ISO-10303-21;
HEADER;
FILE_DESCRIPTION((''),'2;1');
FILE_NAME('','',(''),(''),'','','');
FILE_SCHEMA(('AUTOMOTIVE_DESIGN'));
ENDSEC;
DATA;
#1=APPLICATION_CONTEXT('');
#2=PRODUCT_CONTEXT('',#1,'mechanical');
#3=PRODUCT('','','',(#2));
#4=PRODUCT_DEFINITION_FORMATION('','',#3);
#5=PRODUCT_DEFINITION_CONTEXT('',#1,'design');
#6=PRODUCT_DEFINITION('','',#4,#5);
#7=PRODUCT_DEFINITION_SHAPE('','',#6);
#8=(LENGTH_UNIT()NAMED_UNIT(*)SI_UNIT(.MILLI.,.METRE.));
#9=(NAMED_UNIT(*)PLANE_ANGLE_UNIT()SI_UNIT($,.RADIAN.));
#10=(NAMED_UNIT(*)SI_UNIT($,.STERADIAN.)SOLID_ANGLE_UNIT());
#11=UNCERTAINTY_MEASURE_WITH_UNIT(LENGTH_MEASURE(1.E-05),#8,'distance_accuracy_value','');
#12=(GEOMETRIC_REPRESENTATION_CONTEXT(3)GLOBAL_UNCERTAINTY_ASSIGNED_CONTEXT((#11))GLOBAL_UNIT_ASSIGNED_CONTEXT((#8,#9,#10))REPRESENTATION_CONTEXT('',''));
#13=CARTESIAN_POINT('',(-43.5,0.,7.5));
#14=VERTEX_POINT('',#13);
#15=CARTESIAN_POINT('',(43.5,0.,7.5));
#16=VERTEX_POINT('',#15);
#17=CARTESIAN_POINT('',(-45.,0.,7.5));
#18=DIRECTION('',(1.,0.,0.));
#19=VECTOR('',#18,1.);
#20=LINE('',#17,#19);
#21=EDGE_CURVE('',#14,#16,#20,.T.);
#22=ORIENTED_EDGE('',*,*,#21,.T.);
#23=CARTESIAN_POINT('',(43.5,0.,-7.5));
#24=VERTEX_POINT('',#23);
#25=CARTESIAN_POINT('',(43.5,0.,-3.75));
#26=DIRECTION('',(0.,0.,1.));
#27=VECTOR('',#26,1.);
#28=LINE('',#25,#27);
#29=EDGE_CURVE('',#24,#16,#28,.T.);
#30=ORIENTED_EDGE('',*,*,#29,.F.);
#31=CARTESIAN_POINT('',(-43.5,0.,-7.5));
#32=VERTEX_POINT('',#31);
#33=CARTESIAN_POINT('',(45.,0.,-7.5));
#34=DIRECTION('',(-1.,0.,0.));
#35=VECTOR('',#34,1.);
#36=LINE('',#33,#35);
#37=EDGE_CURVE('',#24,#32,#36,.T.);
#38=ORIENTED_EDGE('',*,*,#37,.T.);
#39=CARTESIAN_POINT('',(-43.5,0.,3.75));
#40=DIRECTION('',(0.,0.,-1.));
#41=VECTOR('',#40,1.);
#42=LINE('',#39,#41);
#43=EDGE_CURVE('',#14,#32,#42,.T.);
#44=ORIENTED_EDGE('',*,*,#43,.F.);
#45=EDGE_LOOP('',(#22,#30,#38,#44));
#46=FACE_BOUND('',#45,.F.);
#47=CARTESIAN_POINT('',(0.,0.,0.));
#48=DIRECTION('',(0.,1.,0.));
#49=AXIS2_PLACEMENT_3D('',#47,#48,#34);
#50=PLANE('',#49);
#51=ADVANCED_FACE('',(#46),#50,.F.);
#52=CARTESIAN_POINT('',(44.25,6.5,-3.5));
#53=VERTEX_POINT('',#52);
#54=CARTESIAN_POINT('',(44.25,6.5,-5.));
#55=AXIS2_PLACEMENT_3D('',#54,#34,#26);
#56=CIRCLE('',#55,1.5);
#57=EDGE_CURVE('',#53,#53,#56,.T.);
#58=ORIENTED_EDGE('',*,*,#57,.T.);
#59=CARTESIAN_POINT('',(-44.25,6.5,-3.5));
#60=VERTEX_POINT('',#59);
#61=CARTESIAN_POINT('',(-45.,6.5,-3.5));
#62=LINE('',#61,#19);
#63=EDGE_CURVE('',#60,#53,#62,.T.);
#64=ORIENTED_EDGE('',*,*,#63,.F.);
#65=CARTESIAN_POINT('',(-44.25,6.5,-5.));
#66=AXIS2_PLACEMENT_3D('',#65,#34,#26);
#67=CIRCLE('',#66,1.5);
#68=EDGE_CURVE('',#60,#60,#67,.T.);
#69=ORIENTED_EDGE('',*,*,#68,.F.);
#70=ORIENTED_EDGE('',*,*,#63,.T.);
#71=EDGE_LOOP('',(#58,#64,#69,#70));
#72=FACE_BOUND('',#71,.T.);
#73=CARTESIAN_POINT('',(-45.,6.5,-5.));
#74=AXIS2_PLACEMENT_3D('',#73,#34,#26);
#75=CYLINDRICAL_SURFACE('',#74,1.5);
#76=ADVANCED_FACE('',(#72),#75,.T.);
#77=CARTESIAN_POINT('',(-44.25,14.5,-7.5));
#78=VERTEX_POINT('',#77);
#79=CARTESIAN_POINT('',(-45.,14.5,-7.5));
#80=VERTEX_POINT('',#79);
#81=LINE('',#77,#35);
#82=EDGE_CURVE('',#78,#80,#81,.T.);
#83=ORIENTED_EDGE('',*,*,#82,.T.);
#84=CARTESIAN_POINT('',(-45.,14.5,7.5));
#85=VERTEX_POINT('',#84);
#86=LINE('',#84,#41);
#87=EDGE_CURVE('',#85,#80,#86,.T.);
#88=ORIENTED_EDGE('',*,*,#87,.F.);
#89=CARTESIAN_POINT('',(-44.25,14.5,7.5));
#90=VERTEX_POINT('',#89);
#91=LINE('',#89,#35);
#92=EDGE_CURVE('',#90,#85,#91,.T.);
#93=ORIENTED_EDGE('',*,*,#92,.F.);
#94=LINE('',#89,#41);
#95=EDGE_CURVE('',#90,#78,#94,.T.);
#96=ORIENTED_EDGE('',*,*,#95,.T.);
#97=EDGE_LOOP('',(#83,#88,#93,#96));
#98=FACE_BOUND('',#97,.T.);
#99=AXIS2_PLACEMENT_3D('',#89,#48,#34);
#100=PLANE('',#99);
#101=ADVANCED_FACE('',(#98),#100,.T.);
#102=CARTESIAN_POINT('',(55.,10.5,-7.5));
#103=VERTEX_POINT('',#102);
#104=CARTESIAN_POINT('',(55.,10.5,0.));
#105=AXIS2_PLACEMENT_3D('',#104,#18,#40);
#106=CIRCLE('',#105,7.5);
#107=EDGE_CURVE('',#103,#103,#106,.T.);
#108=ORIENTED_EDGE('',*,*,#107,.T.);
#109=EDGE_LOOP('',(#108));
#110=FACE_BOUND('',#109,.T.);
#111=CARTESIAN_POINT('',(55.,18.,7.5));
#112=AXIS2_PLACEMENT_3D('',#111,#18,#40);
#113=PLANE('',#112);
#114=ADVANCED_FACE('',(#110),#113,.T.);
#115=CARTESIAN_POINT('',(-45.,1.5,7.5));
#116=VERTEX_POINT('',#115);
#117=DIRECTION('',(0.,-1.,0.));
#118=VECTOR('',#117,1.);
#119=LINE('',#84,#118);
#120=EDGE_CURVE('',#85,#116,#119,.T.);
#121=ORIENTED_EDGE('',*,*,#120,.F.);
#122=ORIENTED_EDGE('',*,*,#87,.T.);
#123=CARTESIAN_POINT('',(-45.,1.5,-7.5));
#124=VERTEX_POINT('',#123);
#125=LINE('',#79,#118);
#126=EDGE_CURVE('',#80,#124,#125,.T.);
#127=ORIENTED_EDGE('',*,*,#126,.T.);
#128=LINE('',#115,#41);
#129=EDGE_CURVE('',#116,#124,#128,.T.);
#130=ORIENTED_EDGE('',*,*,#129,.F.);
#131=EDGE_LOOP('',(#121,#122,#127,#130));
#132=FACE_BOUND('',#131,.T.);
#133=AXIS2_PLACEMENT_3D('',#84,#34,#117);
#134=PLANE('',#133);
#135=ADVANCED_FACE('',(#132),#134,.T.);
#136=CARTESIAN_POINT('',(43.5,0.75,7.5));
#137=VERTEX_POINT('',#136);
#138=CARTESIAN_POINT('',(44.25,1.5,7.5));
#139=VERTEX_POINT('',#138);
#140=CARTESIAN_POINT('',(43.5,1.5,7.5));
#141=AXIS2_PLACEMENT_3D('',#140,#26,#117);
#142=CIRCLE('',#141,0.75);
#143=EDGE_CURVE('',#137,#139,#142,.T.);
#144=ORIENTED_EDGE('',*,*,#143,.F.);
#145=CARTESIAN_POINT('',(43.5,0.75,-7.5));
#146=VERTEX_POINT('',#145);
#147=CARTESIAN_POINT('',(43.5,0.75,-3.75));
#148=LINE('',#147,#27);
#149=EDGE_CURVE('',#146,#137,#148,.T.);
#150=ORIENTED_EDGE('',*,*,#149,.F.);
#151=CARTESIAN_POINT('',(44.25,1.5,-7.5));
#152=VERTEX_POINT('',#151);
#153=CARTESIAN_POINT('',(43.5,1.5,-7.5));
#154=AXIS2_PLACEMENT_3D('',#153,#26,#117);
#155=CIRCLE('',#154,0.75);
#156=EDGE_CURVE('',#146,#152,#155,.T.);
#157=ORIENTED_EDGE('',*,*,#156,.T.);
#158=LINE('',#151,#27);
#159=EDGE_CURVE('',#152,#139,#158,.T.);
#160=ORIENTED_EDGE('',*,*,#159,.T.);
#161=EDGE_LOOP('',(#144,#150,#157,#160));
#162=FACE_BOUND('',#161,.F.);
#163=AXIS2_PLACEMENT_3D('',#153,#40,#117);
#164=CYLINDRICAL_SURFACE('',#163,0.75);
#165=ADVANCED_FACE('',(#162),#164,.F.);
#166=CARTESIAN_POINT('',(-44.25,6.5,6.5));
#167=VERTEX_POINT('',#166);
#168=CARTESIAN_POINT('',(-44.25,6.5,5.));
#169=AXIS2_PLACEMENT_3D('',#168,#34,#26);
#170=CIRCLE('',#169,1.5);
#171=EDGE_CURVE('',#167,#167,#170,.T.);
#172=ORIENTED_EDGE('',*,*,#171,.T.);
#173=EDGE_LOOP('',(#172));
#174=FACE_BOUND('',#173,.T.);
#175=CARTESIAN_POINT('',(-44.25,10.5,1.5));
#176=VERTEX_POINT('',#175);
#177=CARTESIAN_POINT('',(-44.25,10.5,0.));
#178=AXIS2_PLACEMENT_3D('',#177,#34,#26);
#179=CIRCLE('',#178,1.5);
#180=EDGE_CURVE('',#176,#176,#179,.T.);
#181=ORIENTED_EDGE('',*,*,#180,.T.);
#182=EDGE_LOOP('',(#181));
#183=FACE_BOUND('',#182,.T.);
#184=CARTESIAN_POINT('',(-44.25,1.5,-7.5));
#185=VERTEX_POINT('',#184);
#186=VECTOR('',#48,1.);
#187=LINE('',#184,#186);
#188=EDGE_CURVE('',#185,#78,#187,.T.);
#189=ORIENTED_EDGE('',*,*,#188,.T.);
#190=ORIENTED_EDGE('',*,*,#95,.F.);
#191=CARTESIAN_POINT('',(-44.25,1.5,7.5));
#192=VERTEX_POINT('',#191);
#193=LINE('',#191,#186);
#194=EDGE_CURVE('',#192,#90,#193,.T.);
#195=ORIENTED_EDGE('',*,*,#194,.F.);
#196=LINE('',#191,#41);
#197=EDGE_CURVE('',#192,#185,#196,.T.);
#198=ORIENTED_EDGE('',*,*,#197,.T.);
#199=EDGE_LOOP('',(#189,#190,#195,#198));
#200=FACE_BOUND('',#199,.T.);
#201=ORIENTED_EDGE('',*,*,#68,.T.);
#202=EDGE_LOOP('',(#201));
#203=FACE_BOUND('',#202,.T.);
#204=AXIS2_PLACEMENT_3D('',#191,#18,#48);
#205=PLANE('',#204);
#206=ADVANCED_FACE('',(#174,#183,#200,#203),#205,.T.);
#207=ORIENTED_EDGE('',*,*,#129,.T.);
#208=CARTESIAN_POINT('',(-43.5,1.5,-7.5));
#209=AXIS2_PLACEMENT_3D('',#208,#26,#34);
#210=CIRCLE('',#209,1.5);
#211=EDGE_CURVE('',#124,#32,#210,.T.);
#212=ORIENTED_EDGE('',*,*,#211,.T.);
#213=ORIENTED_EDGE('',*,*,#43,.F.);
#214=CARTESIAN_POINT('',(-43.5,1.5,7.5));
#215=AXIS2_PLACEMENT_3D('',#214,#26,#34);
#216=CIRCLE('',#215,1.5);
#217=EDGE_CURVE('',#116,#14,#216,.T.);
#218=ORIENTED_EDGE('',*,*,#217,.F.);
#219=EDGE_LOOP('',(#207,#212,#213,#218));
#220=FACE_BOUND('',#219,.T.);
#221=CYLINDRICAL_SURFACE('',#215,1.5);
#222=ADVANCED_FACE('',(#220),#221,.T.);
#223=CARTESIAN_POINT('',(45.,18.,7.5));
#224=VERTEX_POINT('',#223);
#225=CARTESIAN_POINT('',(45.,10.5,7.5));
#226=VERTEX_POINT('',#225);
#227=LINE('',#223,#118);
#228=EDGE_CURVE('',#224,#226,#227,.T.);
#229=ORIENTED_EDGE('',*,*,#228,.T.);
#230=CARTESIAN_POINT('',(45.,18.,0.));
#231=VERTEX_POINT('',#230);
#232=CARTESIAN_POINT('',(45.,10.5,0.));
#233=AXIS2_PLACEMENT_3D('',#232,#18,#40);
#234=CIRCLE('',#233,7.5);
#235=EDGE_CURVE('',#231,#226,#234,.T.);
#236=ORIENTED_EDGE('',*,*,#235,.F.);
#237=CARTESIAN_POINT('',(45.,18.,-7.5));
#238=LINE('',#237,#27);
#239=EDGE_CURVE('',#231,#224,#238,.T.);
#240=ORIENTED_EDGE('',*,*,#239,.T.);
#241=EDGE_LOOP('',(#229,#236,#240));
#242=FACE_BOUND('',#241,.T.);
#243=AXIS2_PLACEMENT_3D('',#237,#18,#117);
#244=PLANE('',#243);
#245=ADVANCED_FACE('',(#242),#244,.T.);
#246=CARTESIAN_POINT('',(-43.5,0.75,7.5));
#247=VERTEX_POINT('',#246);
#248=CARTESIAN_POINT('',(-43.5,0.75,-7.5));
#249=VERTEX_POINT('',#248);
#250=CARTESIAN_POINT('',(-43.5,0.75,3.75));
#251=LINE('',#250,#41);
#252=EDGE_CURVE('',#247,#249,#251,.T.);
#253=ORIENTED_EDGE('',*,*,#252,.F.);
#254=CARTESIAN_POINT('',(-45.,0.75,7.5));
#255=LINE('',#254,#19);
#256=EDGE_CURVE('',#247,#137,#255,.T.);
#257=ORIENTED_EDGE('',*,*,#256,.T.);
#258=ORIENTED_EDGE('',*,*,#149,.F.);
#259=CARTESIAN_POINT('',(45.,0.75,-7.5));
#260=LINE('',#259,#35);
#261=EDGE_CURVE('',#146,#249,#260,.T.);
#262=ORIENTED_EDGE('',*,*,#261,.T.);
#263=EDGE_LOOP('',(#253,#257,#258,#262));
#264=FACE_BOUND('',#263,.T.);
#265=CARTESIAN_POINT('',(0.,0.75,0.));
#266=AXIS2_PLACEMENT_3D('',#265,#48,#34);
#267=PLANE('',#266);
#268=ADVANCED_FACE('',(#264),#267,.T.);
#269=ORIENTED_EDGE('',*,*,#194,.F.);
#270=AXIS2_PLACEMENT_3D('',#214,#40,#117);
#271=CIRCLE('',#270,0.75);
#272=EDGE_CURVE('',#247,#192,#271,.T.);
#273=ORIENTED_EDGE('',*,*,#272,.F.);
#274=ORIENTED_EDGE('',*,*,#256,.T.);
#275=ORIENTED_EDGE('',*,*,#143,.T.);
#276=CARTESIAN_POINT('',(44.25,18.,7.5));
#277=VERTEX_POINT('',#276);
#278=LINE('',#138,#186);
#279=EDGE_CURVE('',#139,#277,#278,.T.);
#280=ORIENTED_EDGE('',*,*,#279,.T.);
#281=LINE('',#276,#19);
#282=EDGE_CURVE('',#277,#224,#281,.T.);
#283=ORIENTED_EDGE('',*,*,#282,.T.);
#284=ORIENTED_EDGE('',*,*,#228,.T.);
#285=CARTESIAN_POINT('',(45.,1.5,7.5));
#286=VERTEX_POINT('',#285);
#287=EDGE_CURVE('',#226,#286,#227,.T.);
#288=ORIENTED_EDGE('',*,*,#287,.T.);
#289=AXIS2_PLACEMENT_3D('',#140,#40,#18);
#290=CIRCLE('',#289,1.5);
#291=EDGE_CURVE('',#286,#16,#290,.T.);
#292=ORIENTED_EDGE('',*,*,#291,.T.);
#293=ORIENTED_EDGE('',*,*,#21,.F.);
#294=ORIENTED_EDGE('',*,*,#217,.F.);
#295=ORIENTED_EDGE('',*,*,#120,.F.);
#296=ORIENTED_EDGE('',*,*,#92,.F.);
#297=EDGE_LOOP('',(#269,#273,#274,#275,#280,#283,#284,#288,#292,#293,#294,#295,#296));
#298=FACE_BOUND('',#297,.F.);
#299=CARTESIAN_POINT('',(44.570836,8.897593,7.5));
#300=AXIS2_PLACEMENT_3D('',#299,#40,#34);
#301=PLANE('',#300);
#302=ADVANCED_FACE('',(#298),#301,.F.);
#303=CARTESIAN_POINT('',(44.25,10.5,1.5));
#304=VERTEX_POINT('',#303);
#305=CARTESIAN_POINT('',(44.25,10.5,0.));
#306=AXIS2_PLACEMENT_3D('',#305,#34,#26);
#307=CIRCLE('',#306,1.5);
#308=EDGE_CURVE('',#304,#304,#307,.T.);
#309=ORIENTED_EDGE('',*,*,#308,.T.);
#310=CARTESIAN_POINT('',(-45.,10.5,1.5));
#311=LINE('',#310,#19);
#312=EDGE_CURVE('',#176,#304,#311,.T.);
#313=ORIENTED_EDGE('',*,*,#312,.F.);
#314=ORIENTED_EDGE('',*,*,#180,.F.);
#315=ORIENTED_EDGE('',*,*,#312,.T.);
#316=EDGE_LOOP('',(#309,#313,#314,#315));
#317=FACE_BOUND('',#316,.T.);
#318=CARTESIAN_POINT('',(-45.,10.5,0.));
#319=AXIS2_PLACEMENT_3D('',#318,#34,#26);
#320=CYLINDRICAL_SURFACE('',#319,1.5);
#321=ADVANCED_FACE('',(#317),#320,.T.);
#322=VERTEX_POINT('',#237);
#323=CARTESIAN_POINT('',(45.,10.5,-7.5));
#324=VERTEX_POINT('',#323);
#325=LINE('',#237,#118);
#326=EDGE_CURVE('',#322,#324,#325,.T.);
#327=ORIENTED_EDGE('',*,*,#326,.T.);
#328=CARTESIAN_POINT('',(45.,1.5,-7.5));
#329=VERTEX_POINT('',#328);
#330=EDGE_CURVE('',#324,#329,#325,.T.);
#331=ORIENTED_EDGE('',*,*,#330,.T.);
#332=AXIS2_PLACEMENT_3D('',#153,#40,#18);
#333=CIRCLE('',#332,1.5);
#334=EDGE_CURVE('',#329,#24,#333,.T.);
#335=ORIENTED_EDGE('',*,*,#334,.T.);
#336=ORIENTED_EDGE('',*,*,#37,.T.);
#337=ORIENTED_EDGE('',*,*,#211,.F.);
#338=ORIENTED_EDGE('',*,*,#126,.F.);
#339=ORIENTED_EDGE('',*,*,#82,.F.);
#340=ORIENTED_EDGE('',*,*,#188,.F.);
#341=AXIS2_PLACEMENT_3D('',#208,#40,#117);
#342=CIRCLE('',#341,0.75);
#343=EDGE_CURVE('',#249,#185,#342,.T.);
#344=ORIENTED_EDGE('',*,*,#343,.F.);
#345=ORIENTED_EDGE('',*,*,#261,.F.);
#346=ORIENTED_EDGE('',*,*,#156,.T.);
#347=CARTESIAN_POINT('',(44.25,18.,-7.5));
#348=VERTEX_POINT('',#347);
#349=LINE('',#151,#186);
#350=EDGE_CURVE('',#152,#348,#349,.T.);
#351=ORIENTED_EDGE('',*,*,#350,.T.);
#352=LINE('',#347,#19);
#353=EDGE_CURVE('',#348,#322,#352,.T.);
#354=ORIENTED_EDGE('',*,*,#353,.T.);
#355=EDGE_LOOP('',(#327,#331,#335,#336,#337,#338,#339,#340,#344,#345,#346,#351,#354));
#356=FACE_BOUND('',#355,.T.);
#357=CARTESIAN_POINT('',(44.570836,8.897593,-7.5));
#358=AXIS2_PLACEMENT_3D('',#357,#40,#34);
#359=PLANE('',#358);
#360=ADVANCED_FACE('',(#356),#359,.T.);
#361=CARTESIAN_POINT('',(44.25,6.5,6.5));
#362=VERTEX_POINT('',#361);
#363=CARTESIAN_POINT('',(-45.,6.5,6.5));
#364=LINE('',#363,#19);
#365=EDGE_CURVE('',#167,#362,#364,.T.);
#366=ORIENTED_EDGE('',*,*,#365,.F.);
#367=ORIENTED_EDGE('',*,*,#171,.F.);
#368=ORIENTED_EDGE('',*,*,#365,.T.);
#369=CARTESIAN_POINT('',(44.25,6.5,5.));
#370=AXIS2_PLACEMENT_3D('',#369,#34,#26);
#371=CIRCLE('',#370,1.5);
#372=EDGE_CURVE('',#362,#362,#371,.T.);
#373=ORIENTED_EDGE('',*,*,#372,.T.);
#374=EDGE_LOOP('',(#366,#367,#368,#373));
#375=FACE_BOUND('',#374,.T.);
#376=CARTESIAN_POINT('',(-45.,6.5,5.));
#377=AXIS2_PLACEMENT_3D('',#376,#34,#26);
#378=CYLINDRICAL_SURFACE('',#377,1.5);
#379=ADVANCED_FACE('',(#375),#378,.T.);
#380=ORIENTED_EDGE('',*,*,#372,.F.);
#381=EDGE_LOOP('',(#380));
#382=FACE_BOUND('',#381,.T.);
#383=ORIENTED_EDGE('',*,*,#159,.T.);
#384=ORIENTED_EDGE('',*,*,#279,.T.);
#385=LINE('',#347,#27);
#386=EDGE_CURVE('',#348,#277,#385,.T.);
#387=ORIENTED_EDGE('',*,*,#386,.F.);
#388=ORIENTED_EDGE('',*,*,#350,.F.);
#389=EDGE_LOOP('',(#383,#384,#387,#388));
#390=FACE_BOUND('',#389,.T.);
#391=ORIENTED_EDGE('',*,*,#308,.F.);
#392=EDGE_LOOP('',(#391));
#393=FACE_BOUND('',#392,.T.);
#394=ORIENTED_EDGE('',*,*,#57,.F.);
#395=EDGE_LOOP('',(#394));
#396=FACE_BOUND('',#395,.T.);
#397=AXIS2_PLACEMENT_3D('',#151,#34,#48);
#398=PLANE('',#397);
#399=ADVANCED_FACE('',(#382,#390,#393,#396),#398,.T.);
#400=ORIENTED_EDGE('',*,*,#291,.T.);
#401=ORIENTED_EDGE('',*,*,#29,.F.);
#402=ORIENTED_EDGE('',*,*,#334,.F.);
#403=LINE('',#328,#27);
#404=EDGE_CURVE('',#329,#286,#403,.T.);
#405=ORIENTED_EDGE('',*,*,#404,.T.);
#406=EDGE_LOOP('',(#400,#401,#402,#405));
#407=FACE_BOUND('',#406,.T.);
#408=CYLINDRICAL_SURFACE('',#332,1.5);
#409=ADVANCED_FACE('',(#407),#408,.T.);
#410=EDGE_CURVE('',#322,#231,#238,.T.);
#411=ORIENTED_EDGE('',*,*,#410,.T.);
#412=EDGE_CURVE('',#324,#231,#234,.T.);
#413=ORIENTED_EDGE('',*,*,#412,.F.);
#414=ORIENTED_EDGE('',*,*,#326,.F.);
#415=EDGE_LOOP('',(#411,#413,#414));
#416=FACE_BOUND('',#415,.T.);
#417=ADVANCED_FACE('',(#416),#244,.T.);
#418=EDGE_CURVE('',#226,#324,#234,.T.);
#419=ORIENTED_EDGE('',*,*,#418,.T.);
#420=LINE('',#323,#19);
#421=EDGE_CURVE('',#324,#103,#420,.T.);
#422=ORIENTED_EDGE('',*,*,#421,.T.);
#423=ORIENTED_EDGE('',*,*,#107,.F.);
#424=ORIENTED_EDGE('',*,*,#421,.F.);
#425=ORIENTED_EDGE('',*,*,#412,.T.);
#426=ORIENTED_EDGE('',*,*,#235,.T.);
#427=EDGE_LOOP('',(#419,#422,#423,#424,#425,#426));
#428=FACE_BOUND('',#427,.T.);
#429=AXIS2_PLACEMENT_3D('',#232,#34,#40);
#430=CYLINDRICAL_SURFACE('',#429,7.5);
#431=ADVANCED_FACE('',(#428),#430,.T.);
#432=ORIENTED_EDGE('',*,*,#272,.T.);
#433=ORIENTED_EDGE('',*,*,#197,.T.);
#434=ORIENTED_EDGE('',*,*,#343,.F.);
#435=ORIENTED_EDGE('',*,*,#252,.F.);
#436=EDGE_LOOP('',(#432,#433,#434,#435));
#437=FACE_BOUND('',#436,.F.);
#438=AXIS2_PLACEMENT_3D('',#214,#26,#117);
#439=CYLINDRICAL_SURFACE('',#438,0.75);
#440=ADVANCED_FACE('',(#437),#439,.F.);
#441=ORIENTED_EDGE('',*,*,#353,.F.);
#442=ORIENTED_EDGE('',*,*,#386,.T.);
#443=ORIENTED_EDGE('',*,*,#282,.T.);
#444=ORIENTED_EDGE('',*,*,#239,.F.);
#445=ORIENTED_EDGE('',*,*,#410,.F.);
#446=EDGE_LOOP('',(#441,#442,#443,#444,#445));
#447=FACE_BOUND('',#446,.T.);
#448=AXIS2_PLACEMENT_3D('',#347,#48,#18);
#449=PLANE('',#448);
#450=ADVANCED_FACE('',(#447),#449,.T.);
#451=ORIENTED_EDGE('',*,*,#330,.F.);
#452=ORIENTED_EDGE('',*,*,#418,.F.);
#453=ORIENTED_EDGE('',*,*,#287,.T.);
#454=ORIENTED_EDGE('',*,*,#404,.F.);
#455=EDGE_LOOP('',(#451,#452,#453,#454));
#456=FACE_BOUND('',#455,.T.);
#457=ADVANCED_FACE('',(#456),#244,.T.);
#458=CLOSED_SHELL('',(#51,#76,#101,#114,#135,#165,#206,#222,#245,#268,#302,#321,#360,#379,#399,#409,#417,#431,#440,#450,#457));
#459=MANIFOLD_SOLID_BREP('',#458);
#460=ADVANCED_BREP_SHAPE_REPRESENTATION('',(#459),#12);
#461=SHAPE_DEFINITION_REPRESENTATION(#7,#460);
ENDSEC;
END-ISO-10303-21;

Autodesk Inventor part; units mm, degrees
ref_plane "YZ Plane" through (0, 0, 0) normal (1, 0, 0) x (0, 1, 0)
ref_plane "XZ Plane" through (0, 0, 0) normal (0, 1, 0) x (-1, 0, 0)
ref_plane "XY Plane" through (0, 0, 0) normal (0, 0, 1) x (1, 0, 0)
sketch "Sketch1" plane through (0, 0, 0) normal (0, 1, 0) x (-1, 0, 0)
  line L0 (45, 7.5) -> (-45, 7.5)
  line L1 (-45, 7.5) -> (-45, -7.5)
  line L2 (-45, -7.5) -> (45, -7.5)
  line L3 (45, -7.5) -> (45, 7.5)
  line L4 (45, 7.5) -> (-45, -7.5) construction
  line L5 (-45, 7.5) -> (45, -7.5) construction
  point P0 (0, 0)
  dimension "d0" = 90
  dimension "d1" = 15
extrude "Plate1" add sketch "Sketch1" along normal blind 0.75
sketch "Sketch2" plane through (-44.25, 0, 7.5) normal (-1, 0, 0) x (0, -1, 0)
  line L0 (0, -15) -> (0, 0)
  line L1 (0, 0) -> (-14.5, 0)
  line L2 (-14.5, 0) -> (-14.5, -15)
  line L3 (-14.5, -15) -> (0, -15)
edge flange "Flange1" height 14.5 angle 90 thickness 0.75 bend radius 0.75 thickness toward (-1, 0, 0) relief tear relief width 0.75 relief depth 0.375 edges at (-45, 0.75, 0) wall of the first edge with corners at (-44.25, 0, -7.5) (-44.25, 0, 7.5) (-44.25, 14.5, 7.5) (-44.25, 14.5, -7.5)
bend "Bend1"
corner "Corner1"
sketch "Sketch3" plane through (44.25, 0, -7.5) normal (1, 0, 0) x (0, 1, 0)
  line L0 (0, 15) -> (0, 0)
  line L1 (0, 0) -> (18, 0)
  line L2 (18, 0) -> (18, 15)
  line L3 (18, 15) -> (0, 15)
edge flange "Flange2" height 18 angle 90 thickness 0.75 bend radius 0.75 thickness toward (1, 0, 0) relief tear relief width 0.75 relief depth 0.375 edges at (45, 0.75, 0) wall of the first edge with corners at (44.25, 0, 7.5) (44.25, 0, -7.5) (44.25, 18, -7.5) (44.25, 18, 7.5)
bend "Bend2"
corner "Corner2"
sketch "Sketch4" plane through (45, 18, 7.5) normal (1, 0, 0) x (0, 0, -1)
  circle A0 centre (7.5, -7.5) radius 7.5
  point P0 (7.5, -18)
  dimension "d23" = 10.5
  dimension "d24" = 15
extrude "Extrusion1" add sketch "Sketch4" along normal blind 10
sketch "Sketch5" plane through (-45, 14.5, -7.5) normal (-1, 0, 0) x (0, 0, 1)
  circle A0 centre (7.5, -4) radius 1.5
  circle A1 centre (12.5, -8) radius 1.5
  circle A2 centre (2.5, -8) radius 1.5
  point P0 (7.5, -14.5)
  dimension "d29" = 10.5
  dimension "d30" = 3
  dimension "d31" = 3
  dimension "d32" = 3
  dimension "d33" = 5
  dimension "d34" = 5
  dimension "d35" = 4
extrude "Extrusion2" add sketch "Sketch5" against normal up to surface (89.25 mm away)
equation "\"d34\" = d33"
equation "\"d2\" = Thickness"
equation "\"d3\" = BendReliefWidth"
equation "\"d4\" = BendReliefDepth"
equation "\"d5\" = MinimumRemnant"
equation "\"d6\" = TransitionRadius"
equation "\"d9\" = BendRadius"
equation "\"d10\" = CornerReliefSize"
equation "\"d11\" = GapSize"
equation "\"d12\" = JacobiRadiusSize"
equation "\"d13\" = BendReliefWidth"
equation "\"d14\" = BendReliefDepth"
equation "\"d15\" = MinimumRemnant"
equation "\"d16\" = TransitionRadius"
equation "\"d19\" = BendRadius"
equation "\"d20\" = CornerReliefSize"
equation "\"d21\" = GapSize"
equation "\"d22\" = JacobiRadiusSize"
equation "\"BendRadius\" = Thickness"
equation "\"BendReliefWidth\" = Thickness"
equation "\"BendReliefDepth\" = 0.5 * Thickness"
equation "\"CornerReliefSize\" = 4 * Thickness"
equation "\"MinimumRemnant\" = 2 * Thickness"
equation "\"TransitionRadius\" = BendRadius"
equation "\"JacobiRadiusSize\" = BendRadius"
equation "\"GapSize\" = Thickness"
equation "\"Thickness\" = 0.75"
properties part number "026" material "Stainless Steel, 440C"
